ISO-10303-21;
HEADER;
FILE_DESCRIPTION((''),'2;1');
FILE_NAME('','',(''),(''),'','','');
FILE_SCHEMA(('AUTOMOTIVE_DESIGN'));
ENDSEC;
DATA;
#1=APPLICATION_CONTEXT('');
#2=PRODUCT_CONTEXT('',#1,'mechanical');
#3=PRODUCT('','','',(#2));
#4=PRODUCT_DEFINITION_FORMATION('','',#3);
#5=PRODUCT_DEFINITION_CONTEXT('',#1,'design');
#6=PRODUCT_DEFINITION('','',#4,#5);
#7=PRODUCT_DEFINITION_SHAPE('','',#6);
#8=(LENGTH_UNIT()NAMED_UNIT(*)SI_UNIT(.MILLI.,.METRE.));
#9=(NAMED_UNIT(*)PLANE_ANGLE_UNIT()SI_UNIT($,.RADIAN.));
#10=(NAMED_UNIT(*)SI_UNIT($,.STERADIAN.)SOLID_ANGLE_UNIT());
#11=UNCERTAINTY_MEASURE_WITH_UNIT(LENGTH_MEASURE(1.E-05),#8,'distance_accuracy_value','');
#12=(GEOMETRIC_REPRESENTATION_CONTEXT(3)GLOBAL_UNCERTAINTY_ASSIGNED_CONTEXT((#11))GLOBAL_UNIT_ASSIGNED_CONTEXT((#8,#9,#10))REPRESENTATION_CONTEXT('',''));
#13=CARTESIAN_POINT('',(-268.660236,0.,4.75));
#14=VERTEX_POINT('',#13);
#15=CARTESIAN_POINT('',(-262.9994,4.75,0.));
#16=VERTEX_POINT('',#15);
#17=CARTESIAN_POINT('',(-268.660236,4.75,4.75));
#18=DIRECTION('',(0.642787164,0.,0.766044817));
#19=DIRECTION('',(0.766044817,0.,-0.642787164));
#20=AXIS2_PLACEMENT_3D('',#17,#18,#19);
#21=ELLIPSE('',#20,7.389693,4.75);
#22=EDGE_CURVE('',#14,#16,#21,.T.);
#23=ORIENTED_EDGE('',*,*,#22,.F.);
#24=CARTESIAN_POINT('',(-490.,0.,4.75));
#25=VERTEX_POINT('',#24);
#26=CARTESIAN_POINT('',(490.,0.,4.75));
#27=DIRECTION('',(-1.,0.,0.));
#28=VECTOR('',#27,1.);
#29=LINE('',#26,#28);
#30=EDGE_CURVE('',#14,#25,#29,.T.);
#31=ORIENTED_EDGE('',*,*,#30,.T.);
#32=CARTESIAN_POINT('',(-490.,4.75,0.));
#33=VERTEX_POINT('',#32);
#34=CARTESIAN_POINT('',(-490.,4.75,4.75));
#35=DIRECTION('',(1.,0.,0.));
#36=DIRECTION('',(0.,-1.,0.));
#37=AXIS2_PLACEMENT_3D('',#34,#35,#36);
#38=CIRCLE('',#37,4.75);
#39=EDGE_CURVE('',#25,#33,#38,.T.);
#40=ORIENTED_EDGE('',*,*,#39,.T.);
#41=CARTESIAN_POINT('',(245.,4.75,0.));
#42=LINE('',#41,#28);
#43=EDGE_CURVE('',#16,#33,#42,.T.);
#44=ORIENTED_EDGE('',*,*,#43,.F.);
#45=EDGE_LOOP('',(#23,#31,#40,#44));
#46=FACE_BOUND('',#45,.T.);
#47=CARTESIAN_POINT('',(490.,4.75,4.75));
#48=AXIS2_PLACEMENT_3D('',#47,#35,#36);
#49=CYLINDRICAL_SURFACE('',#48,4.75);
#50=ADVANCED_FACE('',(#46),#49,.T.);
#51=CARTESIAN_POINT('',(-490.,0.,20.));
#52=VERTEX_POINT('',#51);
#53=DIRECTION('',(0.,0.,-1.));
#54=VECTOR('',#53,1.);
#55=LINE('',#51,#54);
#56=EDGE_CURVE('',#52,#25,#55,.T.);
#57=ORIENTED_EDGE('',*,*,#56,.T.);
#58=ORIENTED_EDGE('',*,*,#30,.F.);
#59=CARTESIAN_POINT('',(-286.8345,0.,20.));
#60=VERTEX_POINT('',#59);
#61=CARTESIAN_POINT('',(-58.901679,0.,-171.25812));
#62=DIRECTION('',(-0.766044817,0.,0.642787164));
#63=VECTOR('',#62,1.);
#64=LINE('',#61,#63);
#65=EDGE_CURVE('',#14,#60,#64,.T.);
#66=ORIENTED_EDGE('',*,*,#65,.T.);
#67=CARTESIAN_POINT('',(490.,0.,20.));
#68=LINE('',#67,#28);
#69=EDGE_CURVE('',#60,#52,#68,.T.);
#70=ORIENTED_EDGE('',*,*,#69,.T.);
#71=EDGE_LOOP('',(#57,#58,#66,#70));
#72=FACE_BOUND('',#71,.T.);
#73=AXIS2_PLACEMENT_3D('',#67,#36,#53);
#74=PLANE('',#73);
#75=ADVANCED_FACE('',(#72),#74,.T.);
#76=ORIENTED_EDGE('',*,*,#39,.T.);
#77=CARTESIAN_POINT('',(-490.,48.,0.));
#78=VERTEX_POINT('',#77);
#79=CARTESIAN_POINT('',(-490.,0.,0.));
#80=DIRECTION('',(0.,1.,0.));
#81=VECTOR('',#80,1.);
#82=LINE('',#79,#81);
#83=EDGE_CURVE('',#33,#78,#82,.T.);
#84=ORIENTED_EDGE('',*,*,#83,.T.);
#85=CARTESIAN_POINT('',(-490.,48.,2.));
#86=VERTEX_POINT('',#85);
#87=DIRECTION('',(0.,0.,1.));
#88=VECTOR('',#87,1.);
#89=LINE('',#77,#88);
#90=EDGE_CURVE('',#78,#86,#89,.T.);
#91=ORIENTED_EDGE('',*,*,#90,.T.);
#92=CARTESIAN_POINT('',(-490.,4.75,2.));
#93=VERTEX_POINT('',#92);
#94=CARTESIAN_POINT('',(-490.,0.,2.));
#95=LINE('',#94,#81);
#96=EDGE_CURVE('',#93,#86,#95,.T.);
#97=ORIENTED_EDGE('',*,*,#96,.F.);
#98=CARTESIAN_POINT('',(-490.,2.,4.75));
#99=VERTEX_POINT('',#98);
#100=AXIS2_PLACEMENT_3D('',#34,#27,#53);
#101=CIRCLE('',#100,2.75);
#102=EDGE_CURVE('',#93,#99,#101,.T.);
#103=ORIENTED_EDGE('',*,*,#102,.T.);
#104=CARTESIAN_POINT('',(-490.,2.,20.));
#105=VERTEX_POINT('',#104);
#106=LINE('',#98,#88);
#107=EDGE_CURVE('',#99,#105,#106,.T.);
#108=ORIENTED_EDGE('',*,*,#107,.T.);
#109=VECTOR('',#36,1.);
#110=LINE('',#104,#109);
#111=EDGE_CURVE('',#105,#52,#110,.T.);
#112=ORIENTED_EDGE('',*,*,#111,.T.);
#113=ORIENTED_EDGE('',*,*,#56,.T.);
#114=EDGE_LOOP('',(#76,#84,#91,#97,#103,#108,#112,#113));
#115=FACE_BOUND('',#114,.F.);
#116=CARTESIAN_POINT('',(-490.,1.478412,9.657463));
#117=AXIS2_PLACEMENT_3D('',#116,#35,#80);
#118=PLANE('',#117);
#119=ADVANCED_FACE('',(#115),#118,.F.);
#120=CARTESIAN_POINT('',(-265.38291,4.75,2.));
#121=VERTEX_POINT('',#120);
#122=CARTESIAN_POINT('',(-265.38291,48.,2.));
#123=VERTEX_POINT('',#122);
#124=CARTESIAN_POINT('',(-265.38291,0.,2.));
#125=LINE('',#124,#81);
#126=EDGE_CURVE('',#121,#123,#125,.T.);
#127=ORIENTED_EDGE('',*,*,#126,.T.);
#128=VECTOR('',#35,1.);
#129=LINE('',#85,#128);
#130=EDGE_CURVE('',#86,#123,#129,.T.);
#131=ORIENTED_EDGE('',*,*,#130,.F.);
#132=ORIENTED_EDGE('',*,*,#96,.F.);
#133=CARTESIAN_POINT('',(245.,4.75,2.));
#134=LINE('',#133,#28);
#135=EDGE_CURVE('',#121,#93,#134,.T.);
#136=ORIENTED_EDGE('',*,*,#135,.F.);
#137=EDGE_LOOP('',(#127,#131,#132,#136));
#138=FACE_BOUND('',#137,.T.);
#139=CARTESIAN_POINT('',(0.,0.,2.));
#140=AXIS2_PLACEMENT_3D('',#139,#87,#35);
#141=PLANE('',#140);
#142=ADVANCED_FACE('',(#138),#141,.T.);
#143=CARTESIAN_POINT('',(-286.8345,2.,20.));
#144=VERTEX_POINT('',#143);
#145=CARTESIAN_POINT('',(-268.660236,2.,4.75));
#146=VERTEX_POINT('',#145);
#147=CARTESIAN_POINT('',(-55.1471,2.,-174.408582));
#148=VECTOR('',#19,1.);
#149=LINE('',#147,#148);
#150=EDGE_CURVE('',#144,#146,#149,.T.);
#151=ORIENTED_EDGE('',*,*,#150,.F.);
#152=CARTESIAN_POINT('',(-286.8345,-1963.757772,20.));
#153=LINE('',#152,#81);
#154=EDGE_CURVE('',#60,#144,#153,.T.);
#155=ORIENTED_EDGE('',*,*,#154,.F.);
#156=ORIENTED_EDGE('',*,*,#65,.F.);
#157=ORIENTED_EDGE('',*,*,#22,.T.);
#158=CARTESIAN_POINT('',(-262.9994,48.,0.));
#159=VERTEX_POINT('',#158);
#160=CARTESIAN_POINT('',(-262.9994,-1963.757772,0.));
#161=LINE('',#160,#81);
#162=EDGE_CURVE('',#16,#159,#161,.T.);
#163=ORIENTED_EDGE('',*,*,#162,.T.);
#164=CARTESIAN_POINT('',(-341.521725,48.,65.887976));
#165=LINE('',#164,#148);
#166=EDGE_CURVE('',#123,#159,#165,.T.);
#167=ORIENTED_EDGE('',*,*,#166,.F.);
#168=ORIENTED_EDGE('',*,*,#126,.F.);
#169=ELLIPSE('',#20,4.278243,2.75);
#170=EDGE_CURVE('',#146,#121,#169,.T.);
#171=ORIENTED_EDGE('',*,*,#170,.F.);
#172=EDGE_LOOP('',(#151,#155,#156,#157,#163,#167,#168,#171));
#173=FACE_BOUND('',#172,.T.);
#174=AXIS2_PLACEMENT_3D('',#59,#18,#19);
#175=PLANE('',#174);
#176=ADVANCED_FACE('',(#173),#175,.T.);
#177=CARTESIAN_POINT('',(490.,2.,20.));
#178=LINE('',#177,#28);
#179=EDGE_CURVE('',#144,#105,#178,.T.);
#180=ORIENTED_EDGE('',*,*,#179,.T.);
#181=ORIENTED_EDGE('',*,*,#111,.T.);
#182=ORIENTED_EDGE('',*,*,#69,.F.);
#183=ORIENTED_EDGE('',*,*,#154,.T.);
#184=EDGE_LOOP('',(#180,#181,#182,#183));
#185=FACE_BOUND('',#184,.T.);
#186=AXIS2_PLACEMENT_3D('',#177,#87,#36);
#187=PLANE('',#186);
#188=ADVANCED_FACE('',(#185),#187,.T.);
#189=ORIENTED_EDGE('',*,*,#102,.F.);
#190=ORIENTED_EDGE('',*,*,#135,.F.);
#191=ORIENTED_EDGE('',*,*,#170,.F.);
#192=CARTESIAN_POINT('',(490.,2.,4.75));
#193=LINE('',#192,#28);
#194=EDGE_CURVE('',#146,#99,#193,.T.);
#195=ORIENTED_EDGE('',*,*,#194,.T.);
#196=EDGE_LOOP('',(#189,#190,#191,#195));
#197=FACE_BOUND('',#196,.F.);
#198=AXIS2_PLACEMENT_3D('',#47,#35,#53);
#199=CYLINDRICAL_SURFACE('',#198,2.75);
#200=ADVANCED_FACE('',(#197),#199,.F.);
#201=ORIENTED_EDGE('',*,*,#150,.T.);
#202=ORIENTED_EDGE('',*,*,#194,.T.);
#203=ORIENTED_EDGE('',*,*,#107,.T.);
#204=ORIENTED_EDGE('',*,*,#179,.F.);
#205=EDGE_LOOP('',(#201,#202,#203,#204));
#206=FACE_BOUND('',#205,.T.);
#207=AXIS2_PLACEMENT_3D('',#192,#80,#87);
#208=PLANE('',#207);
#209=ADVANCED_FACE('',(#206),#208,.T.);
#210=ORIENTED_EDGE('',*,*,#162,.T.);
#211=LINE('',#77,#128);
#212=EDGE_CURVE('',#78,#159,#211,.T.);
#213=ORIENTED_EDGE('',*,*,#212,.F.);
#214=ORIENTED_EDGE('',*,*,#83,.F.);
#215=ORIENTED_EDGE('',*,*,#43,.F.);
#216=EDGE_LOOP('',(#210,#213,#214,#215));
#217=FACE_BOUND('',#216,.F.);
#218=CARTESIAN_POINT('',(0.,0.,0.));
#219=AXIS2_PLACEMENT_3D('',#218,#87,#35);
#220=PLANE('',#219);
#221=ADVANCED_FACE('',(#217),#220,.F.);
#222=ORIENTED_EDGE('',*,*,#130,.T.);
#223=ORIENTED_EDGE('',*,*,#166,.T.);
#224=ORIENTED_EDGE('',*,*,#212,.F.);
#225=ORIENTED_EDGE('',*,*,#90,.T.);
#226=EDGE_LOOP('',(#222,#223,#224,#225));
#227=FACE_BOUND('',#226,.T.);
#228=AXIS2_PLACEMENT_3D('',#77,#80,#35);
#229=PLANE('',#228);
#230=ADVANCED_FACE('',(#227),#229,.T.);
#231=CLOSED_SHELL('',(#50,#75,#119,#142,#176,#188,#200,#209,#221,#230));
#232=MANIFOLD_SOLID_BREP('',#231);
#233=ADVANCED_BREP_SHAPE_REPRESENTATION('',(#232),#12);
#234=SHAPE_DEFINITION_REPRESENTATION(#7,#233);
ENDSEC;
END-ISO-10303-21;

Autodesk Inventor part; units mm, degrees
ref_plane "YZ Plane" through (0, 0, 0) normal (1, 0, 0) x (0, 1, 0)
ref_plane "XZ Plane" through (0, 0, 0) normal (0, 1, 0) x (-1, 0, 0)
ref_plane "XY Plane" through (0, 0, 0) normal (0, 0, 1) x (1, 0, 0)
sketch "Sketch1" plane through (0, 0, 0) normal (0, 0, 1) x (1, 0, 0)
  line L0 (-490, 48) -> (490, 48)
  line L1 (490, 48) -> (490, 0)
  line L2 (490, 0) -> (-490, 0)
  line L3 (-490, 0) -> (-490, 48)
  point P0 (0, 0)
  point P1 (0, 0)
  dimension "d0" = 980
  dimension "d1" = 48
extrude "Plate1" add sketch "Sketch1" along normal blind 2
sketch "Sketch2" plane through (490, 2, 0) normal (0, -1, 0) x (1, 0, 0)
  line L0 (-980, 0) -> (0, 0)
  line L1 (0, 0) -> (0, 20)
  line L2 (0, 20) -> (-980, 20)
  line L3 (-980, 20) -> (-980, 0)
edge flange "Flange1" height 20 angle 90 thickness 2 bend radius 2.75 thickness toward (0, -1, 0) relief round relief width 2 relief depth 1 edges at (0, 0, 2) wall of the first edge with corners at (-490, 2, 0) (490, 2, 0) (490, 2, 20) (-490, 2, 20)
bend "Bend1"
corner "Corner1"
sketch "Sketch5" plane through (0, 0, 0) normal (0, 0, -1) x (-1, 0, 0)
  line L0 (490, 48) -> (-490, 48) projected
  line L1 (490, 0) -> (-490, 0) projected
  circle A0 centre (0, 48) radius 35
  line L2 (243.95, 48) -> (246.05, 48)
  line L3 (246.05, 48) -> (246.05, 27)
  line L4 (246.05, 27) -> (243.95, 27)
  line L5 (243.95, 27) -> (243.95, 48)
  line L6 (-243.95, 48) -> (-246.05, 48)
  line L7 (-246.05, 48) -> (-246.05, 27)
  line L8 (-246.05, 27) -> (-243.95, 27)
  line L9 (-243.95, 27) -> (-243.95, 48)
  line L10 (0, 48) -> (0, 0) construction
  line L11 (490, 0) -> (490, 48)
  line L12 (-490, 0) -> (-490, 48)
  circle A1 centre (-490, 48) radius 35
  circle A2 centre (490, 48) radius 35
  point P0 (0, 0)
  point P1 (245, 27)
  point P2 (-245, 27)
  point P3 (246.05, 48)
  point P4 (-35, 48)
  point P5 (35, 48)
  point P6 (-246.05, 48)
  point P7 (455, 48)
  point P8 (490, 13)
  point P9 (-490, 13)
  point P10 (-455, 48)
  dimension "d45" = 70
  dimension "d48" = 2.1
  dimension "d49" = 490
  dimension "d51" = 27
  dimension "d52" = 21
extrude "Extrusion1" cut sketch "Sketch5" against normal through all contours L3 L4 L5 L0 | L9 L8 L7 L0
sketch "Sketch9" plane through (0, 0, 2) normal (0, 0, 1) x (1, 0, 0)
  line L0 (-266.5915, 24.3045) -> (-266.5915, 12.3045) construction
  line L1 (-266.5915, 12.3045) -> (-466.5915, 12.3045) construction
  line L2 (-466.5915, 12.3045) -> (-466.5915, 24.3045) construction
  line L3 (-466.5915, 24.3045) -> (-266.5915, 24.3045) construction
  line L4 (-490, 48) -> (490, 48) projected
  point P0 (0, 0)
  point P1 (1.05, 68)
  point P2 (490, 48)
  dimension "d40" = 200
  dimension "d41" = 12
mark "Mark2"
sketch "Sketch10" plane through (-490, 0, 20) normal (0, -1, 0) x (1, 0, 0)
  line L0 (980, -20) -> (0, -20) projected
  line L1 (0, 0) -> (980, 0) projected
  line L2 (980, -20) -> (203.1655, -20)
  line L3 (203.1655, -20) -> (203.1655, 0)
  line L4 (203.1655, 0) -> (980, 0)
  line L5 (980, 0) -> (980, -20)
  line L6 (203.1655, 0) -> (227.0006, -20)
  point P0 (490, -20)
  dimension "d53" = 776.8345
  dimension "d54" = 50
extrude "Extrusion4" cut sketch "Sketch10" along normal through all both and the other way through all contours L0 L6 L1 L5
equation "\"d2\" = Thickness"
equation "\"d3\" = BendReliefWidth"
equation "\"d4\" = BendReliefDepth"
equation "\"d5\" = MinimumRemnant"
equation "\"d6\" = TransitionRadius"
equation "\"d9\" = BendRadius"
equation "\"d10\" = CornerReliefSize"
equation "\"d11\" = GapSize"
equation "\"d12\" = JacobiRadiusSize"
equation "\"BendReliefWidth\" = Thickness"
equation "\"BendReliefDepth\" = 0.5 * Thickness"
equation "\"CornerReliefSize\" = 4 * Thickness"
equation "\"MinimumRemnant\" = 2 * Thickness"
equation "\"TransitionRadius\" = BendRadius"
equation "\"JacobiRadiusSize\" = BendRadius"
equation "\"GapSize\" = Thickness"
equation "\"Thickness\" = 2"
equation "\"BendRadius\" = 2.75"
properties part number "MSC 327 STRINGER BOARD  ##" material "Stainless Steel"
